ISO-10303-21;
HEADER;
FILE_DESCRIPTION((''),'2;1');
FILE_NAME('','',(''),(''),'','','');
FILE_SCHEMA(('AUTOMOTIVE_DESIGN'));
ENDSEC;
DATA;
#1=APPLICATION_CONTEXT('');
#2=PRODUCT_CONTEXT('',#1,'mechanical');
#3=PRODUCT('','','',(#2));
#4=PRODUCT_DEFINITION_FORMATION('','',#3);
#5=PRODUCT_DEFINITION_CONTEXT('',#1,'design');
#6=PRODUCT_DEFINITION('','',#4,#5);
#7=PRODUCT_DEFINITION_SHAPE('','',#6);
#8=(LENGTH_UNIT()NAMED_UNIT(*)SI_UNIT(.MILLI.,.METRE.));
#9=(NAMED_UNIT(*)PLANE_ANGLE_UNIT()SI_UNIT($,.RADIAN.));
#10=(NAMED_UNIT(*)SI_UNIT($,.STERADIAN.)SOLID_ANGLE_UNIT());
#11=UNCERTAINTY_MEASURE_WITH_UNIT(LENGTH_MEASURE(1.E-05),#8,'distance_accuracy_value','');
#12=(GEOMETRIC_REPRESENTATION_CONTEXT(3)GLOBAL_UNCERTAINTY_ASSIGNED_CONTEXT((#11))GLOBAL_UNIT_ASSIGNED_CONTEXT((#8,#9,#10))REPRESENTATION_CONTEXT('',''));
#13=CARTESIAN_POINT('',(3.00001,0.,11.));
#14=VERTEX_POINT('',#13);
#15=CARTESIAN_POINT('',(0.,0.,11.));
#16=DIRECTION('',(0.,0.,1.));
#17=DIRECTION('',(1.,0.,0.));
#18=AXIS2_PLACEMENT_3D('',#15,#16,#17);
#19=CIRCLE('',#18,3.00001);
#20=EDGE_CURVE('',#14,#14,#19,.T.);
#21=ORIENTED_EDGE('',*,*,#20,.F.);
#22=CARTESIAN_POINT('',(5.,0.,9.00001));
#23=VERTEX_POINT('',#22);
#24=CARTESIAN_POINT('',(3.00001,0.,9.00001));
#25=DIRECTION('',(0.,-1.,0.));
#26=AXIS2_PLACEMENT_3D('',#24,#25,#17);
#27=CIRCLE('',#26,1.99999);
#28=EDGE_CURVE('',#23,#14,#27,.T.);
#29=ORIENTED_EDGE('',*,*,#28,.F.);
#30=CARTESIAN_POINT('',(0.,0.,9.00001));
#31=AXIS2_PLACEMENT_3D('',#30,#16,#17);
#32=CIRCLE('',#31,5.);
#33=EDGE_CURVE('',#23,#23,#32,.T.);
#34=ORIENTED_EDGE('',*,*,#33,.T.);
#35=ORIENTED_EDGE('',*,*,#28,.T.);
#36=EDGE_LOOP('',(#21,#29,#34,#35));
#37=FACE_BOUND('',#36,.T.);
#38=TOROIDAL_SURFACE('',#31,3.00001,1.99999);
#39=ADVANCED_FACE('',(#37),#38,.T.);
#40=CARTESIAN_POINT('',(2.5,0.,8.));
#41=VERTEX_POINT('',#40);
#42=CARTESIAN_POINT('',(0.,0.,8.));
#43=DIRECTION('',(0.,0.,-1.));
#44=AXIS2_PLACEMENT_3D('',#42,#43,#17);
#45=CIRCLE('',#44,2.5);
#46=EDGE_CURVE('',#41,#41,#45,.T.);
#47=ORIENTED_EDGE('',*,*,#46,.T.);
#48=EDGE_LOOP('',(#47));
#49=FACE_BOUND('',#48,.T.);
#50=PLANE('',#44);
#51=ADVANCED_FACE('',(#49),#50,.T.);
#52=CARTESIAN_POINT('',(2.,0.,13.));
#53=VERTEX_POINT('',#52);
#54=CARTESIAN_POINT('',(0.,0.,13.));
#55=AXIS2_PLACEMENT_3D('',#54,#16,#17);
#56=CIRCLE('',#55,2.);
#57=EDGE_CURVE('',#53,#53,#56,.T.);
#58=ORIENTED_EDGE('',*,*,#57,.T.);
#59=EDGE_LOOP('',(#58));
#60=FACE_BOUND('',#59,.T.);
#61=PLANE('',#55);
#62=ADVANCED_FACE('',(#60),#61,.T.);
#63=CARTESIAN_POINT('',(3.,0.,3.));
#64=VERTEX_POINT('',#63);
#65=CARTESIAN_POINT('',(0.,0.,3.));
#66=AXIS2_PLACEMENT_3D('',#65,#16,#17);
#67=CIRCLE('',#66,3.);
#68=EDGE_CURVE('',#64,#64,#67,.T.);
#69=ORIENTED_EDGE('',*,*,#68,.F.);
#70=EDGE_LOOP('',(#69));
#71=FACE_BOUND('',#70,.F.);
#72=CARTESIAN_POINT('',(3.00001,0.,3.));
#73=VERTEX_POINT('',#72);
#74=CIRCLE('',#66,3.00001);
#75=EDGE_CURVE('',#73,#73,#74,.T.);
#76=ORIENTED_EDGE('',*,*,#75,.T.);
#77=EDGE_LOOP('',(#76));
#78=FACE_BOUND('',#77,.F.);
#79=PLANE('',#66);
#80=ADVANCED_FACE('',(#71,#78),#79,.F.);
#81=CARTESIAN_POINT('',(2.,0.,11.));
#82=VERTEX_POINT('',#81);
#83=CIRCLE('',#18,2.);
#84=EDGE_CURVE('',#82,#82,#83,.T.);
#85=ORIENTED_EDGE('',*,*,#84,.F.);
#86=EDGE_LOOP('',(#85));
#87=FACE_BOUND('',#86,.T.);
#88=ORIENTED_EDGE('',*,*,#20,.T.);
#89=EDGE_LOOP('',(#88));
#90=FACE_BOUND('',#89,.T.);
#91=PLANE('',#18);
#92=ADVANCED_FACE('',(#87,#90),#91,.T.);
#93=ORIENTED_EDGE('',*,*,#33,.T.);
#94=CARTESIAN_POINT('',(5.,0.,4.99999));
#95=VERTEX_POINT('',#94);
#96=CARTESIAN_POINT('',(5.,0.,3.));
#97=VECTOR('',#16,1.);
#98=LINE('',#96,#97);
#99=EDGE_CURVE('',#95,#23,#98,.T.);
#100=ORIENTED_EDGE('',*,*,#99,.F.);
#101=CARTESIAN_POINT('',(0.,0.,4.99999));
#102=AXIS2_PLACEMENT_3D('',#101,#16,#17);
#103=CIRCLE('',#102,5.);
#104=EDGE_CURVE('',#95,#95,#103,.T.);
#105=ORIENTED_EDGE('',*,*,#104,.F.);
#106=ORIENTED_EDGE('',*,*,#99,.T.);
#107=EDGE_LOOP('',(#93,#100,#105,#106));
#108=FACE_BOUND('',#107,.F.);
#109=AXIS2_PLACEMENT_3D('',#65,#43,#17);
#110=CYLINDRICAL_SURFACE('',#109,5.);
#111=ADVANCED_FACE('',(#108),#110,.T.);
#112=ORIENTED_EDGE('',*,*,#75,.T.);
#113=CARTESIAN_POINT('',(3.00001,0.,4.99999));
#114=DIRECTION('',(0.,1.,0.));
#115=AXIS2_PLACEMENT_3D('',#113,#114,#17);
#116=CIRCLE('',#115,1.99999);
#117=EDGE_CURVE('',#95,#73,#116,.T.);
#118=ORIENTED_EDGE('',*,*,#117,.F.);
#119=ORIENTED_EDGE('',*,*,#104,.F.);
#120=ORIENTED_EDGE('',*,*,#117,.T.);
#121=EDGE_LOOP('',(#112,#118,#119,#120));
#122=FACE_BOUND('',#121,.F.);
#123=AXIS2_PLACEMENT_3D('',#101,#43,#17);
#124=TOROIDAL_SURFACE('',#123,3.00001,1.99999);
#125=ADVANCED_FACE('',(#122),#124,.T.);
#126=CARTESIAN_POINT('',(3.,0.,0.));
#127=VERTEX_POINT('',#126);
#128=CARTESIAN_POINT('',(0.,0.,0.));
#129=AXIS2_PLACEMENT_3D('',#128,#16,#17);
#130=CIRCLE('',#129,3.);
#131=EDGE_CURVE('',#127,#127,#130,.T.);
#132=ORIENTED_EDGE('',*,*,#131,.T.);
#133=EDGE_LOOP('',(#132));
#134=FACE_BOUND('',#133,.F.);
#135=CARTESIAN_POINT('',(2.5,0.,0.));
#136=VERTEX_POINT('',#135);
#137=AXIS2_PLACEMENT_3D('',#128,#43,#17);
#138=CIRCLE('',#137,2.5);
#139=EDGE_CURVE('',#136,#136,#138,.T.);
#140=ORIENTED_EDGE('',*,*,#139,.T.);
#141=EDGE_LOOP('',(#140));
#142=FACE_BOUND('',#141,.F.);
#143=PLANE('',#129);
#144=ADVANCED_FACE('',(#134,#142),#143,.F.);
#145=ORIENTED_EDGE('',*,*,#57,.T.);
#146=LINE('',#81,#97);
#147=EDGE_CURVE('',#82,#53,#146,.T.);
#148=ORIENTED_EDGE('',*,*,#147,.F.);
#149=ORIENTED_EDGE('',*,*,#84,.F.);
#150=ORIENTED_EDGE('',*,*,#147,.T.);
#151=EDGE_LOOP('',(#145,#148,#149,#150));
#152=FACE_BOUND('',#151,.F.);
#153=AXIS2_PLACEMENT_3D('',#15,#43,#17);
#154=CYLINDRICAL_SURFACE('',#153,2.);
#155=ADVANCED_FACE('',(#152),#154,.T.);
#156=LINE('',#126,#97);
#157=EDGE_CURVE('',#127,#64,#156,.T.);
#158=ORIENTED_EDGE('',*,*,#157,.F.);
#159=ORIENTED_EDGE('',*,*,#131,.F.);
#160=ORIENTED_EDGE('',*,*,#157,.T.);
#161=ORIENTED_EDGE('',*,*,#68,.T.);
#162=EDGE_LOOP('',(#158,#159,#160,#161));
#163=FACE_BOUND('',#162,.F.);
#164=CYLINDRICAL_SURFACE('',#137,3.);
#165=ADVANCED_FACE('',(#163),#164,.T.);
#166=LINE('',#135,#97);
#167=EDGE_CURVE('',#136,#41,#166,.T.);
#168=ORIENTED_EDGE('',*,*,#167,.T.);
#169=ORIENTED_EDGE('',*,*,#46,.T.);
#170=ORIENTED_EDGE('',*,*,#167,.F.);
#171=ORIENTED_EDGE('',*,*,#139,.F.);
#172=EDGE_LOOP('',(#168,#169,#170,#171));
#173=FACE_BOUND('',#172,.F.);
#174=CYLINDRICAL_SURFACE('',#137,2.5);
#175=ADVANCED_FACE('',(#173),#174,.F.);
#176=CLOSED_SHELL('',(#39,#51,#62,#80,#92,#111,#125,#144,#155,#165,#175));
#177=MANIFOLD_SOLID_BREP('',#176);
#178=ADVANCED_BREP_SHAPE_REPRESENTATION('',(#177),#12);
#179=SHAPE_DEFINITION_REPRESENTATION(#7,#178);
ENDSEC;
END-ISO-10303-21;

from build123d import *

# Parameters (mm, degrees)
F0_R     = 3
F1_DEPTH = 3
F2_R     = 5
F3_DEPTH = 8
F4_R     = 2
F5_DEPTH = 2
F6_R     = 1.99999
F7_R     = 2.5
F8_DEPTH = 8


# Not quite as in the source:
# - a fillet or chamfer is up to 0.001 mm smaller than in the source, because OpenCascade refuses the exact size


with BuildPart() as f1:
    # F0 (on Top) → F1 (new body)
    with BuildSketch(Plane.XY):
        Circle(F0_R)
    extrude(amount=F1_DEPTH)

    # F2 (on face) → F3 (join)
    with BuildSketch(Plane.XY.offset(3)):
        Circle(F2_R)
    extrude(amount=F3_DEPTH)

    # F4 (on face) → F5 (join)
    with BuildSketch(Plane.XY.offset(11)):
        Circle(F4_R)
    extrude(amount=F5_DEPTH)

    # F6 (radius 2 in the source; OpenCascade refuses exactly that, so slightly less here)
    f6_edges = [f1.edges().sort_by_distance(p)[0] for p in [
        (-5, 0, 11),
        (-5, 0, 3),
    ]]
    fillet(f6_edges, radius=F6_R)

    # F7 (on face) → F8 (cut)
    with BuildSketch(Plane(origin=(0, 0, 0), x_dir=(1, 0, 0), z_dir=(0, 0, -1))):
        Circle(F7_R)
    extrude(amount=-F8_DEPTH, mode=Mode.SUBTRACT)


solid = f1.part
